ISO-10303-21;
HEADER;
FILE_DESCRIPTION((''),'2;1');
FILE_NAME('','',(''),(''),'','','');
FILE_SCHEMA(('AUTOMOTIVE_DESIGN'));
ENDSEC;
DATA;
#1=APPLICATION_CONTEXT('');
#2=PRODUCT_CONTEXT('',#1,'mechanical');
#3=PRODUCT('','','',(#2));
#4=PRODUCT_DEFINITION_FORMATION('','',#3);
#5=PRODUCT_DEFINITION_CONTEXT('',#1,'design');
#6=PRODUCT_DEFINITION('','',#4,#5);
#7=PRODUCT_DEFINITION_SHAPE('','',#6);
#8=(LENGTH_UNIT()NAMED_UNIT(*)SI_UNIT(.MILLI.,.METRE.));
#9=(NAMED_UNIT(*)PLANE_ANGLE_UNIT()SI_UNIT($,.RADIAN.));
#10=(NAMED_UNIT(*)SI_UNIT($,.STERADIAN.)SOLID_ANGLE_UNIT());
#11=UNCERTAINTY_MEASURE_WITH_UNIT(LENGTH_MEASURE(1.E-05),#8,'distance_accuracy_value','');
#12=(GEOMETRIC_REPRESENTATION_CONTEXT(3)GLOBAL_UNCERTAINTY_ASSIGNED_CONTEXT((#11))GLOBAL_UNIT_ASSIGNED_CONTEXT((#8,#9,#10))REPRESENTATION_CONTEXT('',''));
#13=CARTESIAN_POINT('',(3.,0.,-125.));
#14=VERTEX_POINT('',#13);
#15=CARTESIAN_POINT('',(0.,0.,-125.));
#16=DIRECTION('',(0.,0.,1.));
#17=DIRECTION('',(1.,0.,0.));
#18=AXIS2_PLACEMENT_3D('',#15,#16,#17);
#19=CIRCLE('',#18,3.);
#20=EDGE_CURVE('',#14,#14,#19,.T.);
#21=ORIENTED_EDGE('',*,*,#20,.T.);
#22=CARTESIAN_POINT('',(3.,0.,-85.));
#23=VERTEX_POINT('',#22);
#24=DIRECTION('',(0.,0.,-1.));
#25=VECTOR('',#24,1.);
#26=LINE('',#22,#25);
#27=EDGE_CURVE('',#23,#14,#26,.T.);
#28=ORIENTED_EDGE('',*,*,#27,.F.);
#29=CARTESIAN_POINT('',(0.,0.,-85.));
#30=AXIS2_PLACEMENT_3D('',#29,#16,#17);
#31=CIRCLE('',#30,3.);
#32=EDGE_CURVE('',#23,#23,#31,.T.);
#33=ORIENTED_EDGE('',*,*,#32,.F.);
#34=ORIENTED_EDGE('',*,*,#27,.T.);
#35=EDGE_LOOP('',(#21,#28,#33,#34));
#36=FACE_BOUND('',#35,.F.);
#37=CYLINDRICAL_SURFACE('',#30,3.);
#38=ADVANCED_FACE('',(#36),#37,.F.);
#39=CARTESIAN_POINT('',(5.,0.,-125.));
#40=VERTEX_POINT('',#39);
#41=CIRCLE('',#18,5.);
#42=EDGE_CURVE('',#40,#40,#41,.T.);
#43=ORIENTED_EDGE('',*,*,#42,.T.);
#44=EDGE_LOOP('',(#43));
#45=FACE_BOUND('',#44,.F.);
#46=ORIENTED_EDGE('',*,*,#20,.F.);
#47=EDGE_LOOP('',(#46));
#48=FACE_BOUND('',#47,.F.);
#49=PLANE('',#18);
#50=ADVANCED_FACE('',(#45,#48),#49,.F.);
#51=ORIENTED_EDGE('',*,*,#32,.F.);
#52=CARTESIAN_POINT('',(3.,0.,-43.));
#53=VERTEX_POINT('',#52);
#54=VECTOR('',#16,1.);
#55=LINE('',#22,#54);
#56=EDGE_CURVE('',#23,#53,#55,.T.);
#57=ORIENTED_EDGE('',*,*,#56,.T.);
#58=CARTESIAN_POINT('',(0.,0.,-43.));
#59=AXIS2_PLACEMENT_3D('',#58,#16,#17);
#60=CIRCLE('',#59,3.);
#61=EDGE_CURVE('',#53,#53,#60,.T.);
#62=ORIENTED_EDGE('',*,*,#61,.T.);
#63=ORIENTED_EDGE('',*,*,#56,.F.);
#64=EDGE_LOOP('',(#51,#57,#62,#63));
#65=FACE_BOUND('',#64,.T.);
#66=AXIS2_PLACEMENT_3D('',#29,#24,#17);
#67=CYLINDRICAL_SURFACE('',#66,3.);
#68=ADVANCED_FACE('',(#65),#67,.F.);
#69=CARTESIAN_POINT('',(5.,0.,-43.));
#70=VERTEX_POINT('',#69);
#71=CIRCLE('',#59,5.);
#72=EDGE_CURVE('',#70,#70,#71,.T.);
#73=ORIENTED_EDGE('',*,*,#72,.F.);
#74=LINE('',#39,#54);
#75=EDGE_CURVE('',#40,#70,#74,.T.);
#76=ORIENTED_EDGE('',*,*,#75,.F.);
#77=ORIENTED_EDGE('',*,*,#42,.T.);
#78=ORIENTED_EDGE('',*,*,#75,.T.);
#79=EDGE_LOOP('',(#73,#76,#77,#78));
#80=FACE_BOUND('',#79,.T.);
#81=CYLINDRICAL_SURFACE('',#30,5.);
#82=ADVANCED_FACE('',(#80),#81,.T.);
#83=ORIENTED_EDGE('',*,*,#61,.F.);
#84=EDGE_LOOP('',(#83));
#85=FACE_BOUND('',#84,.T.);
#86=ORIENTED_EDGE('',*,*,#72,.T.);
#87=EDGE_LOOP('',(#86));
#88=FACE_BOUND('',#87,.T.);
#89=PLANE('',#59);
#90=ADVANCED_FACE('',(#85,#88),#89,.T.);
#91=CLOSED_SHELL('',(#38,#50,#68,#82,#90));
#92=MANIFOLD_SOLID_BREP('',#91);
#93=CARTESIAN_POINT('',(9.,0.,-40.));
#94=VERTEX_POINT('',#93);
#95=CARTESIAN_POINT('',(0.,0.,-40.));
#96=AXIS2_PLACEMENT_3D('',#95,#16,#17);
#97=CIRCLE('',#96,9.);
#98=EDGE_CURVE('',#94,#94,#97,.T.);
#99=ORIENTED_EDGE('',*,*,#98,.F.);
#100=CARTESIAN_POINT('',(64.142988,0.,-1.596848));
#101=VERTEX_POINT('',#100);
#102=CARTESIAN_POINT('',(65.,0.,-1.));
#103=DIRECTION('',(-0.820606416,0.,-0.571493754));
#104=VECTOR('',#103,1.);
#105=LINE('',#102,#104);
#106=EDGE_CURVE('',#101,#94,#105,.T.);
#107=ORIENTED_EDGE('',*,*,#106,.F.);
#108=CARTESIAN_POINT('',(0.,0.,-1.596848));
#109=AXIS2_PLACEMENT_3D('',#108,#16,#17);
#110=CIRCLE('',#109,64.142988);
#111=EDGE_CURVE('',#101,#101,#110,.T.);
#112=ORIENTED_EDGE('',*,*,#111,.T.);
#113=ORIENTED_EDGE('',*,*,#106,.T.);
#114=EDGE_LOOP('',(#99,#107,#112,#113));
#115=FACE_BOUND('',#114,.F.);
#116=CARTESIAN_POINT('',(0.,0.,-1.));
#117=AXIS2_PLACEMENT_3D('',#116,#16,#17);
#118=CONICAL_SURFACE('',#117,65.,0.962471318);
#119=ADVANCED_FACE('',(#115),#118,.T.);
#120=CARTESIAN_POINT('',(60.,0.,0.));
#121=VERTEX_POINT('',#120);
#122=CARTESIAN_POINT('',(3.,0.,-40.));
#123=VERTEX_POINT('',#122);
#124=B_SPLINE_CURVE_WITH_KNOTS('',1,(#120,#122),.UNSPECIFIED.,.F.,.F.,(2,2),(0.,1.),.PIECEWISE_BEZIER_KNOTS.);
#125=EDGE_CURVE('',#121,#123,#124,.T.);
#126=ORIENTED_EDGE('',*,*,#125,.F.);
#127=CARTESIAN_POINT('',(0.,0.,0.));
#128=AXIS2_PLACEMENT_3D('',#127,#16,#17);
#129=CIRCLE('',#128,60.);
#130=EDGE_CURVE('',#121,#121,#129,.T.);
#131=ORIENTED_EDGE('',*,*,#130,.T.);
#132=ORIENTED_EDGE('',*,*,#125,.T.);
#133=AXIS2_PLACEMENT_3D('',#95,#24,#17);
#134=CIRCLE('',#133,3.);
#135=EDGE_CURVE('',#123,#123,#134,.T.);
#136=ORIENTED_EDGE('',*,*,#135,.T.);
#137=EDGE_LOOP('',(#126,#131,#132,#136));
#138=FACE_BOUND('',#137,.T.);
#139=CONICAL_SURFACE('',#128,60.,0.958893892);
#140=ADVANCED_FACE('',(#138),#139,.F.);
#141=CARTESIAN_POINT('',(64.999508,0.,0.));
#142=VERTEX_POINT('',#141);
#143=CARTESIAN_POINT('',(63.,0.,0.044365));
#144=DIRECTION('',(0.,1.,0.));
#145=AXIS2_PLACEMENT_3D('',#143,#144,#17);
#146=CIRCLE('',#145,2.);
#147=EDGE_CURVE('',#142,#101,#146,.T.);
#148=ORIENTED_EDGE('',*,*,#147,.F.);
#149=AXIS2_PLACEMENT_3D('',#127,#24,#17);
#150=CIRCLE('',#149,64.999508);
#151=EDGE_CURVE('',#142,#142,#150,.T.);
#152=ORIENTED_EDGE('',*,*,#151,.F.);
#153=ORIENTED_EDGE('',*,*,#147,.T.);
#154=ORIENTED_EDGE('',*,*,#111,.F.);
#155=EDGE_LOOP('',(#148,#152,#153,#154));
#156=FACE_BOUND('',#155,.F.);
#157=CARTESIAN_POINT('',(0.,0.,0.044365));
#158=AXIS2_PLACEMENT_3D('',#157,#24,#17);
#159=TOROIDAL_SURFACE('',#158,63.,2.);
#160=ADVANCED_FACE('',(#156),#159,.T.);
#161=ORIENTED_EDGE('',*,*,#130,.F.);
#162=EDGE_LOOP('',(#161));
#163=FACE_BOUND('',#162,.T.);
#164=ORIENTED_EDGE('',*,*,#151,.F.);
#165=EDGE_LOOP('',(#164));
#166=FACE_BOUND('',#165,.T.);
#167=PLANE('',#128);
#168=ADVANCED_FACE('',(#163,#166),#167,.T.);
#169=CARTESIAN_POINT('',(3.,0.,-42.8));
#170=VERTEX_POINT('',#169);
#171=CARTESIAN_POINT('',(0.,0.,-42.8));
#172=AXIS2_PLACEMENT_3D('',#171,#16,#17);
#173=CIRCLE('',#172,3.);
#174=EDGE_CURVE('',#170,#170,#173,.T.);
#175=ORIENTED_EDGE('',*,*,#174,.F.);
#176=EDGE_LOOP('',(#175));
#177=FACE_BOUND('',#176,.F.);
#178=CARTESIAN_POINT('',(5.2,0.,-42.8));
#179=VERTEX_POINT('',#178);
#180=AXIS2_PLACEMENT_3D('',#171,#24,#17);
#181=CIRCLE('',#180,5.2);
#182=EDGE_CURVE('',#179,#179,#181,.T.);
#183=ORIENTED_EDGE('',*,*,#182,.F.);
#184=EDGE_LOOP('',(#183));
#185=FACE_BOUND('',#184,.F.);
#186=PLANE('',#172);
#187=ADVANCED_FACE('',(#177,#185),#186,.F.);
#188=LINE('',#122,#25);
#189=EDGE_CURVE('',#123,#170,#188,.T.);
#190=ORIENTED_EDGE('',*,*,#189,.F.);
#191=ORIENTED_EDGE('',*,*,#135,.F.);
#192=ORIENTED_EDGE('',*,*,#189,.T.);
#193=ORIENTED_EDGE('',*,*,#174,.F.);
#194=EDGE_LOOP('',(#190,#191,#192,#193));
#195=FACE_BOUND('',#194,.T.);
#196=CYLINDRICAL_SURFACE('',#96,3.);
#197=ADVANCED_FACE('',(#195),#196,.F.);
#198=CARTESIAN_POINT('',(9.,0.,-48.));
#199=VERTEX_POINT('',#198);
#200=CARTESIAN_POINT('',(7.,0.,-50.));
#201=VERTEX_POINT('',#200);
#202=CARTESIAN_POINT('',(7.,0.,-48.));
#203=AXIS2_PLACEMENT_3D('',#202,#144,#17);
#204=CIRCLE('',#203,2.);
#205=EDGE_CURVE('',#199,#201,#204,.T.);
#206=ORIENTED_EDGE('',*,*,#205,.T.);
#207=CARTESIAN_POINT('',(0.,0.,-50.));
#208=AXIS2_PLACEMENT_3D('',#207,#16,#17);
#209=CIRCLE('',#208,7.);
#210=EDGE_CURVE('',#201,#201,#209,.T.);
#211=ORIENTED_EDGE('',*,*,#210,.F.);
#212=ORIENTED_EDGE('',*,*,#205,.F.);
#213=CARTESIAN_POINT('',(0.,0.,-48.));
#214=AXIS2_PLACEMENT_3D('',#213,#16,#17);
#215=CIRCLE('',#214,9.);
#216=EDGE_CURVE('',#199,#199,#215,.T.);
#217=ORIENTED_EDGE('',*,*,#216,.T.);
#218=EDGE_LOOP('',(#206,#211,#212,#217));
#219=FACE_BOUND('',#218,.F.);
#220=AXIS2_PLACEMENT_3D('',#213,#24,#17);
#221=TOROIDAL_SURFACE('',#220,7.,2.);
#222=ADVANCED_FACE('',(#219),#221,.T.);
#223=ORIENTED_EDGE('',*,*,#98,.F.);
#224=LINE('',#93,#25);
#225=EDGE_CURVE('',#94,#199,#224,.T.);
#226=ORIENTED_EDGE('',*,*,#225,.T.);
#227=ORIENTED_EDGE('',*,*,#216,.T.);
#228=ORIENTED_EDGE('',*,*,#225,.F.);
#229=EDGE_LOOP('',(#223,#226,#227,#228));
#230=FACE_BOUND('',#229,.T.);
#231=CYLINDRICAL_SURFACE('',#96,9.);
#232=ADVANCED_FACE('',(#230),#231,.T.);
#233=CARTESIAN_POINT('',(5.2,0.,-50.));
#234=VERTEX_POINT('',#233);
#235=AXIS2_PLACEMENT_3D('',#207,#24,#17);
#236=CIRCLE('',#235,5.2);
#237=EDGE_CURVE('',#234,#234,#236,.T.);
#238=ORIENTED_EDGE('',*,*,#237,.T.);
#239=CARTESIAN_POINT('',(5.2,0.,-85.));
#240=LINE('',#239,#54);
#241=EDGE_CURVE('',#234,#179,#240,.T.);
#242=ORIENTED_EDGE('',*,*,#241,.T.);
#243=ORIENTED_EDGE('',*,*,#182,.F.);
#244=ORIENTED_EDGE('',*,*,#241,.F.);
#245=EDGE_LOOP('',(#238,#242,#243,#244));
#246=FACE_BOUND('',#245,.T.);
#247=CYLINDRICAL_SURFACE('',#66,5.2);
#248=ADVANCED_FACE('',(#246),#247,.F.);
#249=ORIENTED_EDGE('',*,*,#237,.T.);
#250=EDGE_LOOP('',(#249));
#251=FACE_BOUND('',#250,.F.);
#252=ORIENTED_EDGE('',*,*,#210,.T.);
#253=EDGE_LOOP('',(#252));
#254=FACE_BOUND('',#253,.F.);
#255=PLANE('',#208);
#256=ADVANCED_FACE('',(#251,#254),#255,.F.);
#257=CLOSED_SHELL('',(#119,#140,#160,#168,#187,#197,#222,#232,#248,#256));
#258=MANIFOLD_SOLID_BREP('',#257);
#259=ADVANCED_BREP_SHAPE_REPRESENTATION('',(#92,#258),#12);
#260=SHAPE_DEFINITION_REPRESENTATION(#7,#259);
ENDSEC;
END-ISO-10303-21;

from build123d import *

# Parameters (mm, degrees)
F0_R       = 65
F0_R_2     = 60
F1_DEPTH   = 40
F2_R       = 3
F4_SIZE2   = 56
F4_SIZE    = 39
F5_DEPTH   = 10
F8_R       = 5
F8_R_2     = 3
F9_DEPTH   = 42
F10_OFFSET = 0.2
F11_DEPTH  = 40


# Not quite as in the source:
# - a fillet or chamfer that OpenCascade refuses, or shapes differently, is made with other operations: its cross-section is extruded or revolved along the edge and cut away or added


with BuildPart() as f1:
    # F0 (on Top) → F1 (new body)
    with BuildSketch(Plane.XY):
        Circle(F0_R)
        Circle(F0_R_2, mode=Mode.SUBTRACT)
        Circle(F0_R_2)
    extrude(amount=-F1_DEPTH)

    # F0 (on Top) → F3 section 0
    with BuildSketch(Plane.XY):
        Circle(F0_R_2)
    # F2 (on face) → F3 section 1
    with BuildSketch(Plane(origin=(0, 0, -40), x_dir=(1, 0, 0), z_dir=(0, 0, -1))):
        Circle(F2_R)
    loft(mode=Mode.SUBTRACT)

    # F4
    f4_edges = [f1.edges().sort_by_distance(p)[0] for p in [
        (-65, 0, -40),
    ]]
    f4_side = f1.faces().sort_by_distance((-65, 0, -20))[0]
    chamfer(f4_edges, length=F4_SIZE, length2=F4_SIZE2, reference=f4_side)

    # F5 (add): a face of the model
    f5_faces = [f1.faces().sort_by_distance(p)[0] for p in [
        (-8.7454415588, 0, -40),
    ]]
    extrude(f5_faces, amount=F5_DEPTH)

    # F6: fillet of radius 2 on 2 edges, made by hand

    # F6_s1 → F6_t2 (revolve, cut)
    with BuildSketch(Plane.XZ):
        with BuildLine():
            ThreePointArc((65, 0.0443648455), (64.7728472883, -0.8813848467), (64.1429875075, -1.5968479858))
            Line((64.1429875075, -1.5968479858), (65, -1))
            Line((65, -1), (65, 0.0443648455))
        make_face()
    revolve(axis=Axis((0, 0, -1), (0, 0, 1)), mode=Mode.SUBTRACT)

    # F6_s3 → F6_t4 (revolve, cut)
    with BuildSketch(Plane.XZ):
        with BuildLine():
            ThreePointArc((9, -48), (8.4142135624, -49.4142135624), (7, -50))
            Line((7, -50), (9, -50))
            Line((9, -50), (9, -48))
        make_face()
    revolve(axis=Axis((0, 0, -50), (0, 0, 1)), mode=Mode.SUBTRACT)


with BuildPart() as f9:
    # F8 (on offset) → F9 (new body)
    with BuildSketch(Plane.XY.offset(-85)):
        Circle(F8_R)
        Circle(F8_R_2, mode=Mode.SUBTRACT)
    extrude(amount=F9_DEPTH)


with BuildPart() as f1_1:
    add(f1.part)

    # F10: cut F9, made larger all round first
    f10_tool = offset(f9.part, amount=F10_OFFSET, kind=Kind.INTERSECTION, mode=Mode.PRIVATE)
    add(f10_tool, mode=Mode.SUBTRACT)


with BuildPart() as f9_1:
    add(f9.part)

    # F11 (add): a face of the model
    f11_faces = [f9_1.faces().sort_by_distance(p)[0] for p in [
        (-4.8585786438, 0, -85),
    ]]
    extrude(f11_faces, amount=F11_DEPTH)


solid = Compound([f1_1.part, f9_1.part])
